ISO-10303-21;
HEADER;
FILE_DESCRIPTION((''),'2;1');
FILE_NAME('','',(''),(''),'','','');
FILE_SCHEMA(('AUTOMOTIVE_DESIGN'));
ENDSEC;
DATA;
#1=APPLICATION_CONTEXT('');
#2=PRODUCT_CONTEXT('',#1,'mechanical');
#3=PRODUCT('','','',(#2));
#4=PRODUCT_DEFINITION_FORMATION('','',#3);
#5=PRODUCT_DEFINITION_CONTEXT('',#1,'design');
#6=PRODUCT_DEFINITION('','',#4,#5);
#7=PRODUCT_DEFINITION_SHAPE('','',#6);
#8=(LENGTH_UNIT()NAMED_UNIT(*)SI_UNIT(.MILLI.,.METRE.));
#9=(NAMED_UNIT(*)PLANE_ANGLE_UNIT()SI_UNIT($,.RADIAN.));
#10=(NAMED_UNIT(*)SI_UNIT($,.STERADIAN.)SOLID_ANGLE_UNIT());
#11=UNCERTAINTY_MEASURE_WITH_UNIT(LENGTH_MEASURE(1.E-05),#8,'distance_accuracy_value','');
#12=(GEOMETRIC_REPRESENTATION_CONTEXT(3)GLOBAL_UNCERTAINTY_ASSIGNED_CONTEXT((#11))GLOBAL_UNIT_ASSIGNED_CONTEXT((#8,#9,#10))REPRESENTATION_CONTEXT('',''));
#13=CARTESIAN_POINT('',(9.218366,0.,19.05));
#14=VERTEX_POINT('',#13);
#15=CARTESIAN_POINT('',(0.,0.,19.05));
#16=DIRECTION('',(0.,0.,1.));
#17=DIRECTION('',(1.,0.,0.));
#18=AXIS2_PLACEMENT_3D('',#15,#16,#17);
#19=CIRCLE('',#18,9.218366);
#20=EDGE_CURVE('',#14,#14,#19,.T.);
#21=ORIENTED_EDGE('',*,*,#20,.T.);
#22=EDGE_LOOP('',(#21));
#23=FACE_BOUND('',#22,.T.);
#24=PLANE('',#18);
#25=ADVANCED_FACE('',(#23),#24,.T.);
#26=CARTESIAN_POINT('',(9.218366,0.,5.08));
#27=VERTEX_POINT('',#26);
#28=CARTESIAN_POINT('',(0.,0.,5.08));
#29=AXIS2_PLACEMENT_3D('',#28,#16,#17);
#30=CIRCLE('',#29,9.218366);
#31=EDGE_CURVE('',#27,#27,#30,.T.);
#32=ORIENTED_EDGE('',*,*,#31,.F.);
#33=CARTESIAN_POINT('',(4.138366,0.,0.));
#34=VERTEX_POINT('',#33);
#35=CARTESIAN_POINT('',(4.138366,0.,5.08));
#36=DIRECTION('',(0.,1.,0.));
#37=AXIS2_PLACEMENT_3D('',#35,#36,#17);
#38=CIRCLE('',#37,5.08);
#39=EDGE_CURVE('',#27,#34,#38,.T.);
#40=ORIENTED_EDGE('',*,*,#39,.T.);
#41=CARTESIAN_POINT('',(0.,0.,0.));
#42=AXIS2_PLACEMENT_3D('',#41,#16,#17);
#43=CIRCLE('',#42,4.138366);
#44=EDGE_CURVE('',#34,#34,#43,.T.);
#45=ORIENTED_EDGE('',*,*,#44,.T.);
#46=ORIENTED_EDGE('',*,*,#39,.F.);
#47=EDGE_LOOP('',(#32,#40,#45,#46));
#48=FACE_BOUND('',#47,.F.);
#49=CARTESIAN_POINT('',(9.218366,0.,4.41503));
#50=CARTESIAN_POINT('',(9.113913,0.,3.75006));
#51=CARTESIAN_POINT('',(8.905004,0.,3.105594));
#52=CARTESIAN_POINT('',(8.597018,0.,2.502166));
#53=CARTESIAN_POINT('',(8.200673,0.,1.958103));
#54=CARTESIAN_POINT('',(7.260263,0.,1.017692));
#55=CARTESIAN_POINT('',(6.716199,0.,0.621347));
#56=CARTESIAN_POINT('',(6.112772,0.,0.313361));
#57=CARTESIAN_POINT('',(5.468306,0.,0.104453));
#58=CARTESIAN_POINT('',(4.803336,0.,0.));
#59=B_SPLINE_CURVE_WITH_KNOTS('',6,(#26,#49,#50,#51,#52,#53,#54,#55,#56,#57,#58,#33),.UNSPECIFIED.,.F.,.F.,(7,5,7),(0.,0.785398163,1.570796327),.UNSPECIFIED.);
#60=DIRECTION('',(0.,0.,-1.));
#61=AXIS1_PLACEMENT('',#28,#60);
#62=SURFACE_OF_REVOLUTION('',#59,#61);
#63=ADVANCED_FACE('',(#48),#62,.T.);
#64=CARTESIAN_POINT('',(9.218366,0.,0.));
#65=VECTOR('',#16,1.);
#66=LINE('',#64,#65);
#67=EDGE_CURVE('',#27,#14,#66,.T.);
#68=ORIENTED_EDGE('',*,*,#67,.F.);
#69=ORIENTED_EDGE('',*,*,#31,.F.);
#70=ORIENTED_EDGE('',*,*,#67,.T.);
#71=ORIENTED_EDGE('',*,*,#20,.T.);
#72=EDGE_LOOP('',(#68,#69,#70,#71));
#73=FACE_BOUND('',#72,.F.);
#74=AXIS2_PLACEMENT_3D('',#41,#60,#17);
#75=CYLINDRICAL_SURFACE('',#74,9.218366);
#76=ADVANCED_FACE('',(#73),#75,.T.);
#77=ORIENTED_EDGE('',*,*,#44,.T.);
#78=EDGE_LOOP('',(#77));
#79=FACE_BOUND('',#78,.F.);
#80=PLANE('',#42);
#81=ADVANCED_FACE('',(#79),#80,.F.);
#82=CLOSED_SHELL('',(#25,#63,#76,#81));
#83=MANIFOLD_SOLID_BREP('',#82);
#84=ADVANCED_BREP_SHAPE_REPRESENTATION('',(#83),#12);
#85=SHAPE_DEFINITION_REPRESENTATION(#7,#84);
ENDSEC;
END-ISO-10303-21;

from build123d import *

# Parameters (mm, degrees)
F0_R     = 9.2183658135
F1_DEPTH = 19.05
F5_R     = 5.08


# Not quite as in the source:
# - the program builds the solid bodies; features that only make, move or delete a surface that nothing else refers to are left out


with BuildPart() as f1:
    # F0 (on Top) → F1 (new body)
    with BuildSketch(Plane.XY):
        Circle(F0_R)
    extrude(amount=F1_DEPTH)

    # F5
    f5_edges = [f1.edges().sort_by_distance(p)[0] for p in [
        (-9.218366, 0, 0),
    ]]
    fillet(f5_edges, radius=F5_R)


solid = f1.part
